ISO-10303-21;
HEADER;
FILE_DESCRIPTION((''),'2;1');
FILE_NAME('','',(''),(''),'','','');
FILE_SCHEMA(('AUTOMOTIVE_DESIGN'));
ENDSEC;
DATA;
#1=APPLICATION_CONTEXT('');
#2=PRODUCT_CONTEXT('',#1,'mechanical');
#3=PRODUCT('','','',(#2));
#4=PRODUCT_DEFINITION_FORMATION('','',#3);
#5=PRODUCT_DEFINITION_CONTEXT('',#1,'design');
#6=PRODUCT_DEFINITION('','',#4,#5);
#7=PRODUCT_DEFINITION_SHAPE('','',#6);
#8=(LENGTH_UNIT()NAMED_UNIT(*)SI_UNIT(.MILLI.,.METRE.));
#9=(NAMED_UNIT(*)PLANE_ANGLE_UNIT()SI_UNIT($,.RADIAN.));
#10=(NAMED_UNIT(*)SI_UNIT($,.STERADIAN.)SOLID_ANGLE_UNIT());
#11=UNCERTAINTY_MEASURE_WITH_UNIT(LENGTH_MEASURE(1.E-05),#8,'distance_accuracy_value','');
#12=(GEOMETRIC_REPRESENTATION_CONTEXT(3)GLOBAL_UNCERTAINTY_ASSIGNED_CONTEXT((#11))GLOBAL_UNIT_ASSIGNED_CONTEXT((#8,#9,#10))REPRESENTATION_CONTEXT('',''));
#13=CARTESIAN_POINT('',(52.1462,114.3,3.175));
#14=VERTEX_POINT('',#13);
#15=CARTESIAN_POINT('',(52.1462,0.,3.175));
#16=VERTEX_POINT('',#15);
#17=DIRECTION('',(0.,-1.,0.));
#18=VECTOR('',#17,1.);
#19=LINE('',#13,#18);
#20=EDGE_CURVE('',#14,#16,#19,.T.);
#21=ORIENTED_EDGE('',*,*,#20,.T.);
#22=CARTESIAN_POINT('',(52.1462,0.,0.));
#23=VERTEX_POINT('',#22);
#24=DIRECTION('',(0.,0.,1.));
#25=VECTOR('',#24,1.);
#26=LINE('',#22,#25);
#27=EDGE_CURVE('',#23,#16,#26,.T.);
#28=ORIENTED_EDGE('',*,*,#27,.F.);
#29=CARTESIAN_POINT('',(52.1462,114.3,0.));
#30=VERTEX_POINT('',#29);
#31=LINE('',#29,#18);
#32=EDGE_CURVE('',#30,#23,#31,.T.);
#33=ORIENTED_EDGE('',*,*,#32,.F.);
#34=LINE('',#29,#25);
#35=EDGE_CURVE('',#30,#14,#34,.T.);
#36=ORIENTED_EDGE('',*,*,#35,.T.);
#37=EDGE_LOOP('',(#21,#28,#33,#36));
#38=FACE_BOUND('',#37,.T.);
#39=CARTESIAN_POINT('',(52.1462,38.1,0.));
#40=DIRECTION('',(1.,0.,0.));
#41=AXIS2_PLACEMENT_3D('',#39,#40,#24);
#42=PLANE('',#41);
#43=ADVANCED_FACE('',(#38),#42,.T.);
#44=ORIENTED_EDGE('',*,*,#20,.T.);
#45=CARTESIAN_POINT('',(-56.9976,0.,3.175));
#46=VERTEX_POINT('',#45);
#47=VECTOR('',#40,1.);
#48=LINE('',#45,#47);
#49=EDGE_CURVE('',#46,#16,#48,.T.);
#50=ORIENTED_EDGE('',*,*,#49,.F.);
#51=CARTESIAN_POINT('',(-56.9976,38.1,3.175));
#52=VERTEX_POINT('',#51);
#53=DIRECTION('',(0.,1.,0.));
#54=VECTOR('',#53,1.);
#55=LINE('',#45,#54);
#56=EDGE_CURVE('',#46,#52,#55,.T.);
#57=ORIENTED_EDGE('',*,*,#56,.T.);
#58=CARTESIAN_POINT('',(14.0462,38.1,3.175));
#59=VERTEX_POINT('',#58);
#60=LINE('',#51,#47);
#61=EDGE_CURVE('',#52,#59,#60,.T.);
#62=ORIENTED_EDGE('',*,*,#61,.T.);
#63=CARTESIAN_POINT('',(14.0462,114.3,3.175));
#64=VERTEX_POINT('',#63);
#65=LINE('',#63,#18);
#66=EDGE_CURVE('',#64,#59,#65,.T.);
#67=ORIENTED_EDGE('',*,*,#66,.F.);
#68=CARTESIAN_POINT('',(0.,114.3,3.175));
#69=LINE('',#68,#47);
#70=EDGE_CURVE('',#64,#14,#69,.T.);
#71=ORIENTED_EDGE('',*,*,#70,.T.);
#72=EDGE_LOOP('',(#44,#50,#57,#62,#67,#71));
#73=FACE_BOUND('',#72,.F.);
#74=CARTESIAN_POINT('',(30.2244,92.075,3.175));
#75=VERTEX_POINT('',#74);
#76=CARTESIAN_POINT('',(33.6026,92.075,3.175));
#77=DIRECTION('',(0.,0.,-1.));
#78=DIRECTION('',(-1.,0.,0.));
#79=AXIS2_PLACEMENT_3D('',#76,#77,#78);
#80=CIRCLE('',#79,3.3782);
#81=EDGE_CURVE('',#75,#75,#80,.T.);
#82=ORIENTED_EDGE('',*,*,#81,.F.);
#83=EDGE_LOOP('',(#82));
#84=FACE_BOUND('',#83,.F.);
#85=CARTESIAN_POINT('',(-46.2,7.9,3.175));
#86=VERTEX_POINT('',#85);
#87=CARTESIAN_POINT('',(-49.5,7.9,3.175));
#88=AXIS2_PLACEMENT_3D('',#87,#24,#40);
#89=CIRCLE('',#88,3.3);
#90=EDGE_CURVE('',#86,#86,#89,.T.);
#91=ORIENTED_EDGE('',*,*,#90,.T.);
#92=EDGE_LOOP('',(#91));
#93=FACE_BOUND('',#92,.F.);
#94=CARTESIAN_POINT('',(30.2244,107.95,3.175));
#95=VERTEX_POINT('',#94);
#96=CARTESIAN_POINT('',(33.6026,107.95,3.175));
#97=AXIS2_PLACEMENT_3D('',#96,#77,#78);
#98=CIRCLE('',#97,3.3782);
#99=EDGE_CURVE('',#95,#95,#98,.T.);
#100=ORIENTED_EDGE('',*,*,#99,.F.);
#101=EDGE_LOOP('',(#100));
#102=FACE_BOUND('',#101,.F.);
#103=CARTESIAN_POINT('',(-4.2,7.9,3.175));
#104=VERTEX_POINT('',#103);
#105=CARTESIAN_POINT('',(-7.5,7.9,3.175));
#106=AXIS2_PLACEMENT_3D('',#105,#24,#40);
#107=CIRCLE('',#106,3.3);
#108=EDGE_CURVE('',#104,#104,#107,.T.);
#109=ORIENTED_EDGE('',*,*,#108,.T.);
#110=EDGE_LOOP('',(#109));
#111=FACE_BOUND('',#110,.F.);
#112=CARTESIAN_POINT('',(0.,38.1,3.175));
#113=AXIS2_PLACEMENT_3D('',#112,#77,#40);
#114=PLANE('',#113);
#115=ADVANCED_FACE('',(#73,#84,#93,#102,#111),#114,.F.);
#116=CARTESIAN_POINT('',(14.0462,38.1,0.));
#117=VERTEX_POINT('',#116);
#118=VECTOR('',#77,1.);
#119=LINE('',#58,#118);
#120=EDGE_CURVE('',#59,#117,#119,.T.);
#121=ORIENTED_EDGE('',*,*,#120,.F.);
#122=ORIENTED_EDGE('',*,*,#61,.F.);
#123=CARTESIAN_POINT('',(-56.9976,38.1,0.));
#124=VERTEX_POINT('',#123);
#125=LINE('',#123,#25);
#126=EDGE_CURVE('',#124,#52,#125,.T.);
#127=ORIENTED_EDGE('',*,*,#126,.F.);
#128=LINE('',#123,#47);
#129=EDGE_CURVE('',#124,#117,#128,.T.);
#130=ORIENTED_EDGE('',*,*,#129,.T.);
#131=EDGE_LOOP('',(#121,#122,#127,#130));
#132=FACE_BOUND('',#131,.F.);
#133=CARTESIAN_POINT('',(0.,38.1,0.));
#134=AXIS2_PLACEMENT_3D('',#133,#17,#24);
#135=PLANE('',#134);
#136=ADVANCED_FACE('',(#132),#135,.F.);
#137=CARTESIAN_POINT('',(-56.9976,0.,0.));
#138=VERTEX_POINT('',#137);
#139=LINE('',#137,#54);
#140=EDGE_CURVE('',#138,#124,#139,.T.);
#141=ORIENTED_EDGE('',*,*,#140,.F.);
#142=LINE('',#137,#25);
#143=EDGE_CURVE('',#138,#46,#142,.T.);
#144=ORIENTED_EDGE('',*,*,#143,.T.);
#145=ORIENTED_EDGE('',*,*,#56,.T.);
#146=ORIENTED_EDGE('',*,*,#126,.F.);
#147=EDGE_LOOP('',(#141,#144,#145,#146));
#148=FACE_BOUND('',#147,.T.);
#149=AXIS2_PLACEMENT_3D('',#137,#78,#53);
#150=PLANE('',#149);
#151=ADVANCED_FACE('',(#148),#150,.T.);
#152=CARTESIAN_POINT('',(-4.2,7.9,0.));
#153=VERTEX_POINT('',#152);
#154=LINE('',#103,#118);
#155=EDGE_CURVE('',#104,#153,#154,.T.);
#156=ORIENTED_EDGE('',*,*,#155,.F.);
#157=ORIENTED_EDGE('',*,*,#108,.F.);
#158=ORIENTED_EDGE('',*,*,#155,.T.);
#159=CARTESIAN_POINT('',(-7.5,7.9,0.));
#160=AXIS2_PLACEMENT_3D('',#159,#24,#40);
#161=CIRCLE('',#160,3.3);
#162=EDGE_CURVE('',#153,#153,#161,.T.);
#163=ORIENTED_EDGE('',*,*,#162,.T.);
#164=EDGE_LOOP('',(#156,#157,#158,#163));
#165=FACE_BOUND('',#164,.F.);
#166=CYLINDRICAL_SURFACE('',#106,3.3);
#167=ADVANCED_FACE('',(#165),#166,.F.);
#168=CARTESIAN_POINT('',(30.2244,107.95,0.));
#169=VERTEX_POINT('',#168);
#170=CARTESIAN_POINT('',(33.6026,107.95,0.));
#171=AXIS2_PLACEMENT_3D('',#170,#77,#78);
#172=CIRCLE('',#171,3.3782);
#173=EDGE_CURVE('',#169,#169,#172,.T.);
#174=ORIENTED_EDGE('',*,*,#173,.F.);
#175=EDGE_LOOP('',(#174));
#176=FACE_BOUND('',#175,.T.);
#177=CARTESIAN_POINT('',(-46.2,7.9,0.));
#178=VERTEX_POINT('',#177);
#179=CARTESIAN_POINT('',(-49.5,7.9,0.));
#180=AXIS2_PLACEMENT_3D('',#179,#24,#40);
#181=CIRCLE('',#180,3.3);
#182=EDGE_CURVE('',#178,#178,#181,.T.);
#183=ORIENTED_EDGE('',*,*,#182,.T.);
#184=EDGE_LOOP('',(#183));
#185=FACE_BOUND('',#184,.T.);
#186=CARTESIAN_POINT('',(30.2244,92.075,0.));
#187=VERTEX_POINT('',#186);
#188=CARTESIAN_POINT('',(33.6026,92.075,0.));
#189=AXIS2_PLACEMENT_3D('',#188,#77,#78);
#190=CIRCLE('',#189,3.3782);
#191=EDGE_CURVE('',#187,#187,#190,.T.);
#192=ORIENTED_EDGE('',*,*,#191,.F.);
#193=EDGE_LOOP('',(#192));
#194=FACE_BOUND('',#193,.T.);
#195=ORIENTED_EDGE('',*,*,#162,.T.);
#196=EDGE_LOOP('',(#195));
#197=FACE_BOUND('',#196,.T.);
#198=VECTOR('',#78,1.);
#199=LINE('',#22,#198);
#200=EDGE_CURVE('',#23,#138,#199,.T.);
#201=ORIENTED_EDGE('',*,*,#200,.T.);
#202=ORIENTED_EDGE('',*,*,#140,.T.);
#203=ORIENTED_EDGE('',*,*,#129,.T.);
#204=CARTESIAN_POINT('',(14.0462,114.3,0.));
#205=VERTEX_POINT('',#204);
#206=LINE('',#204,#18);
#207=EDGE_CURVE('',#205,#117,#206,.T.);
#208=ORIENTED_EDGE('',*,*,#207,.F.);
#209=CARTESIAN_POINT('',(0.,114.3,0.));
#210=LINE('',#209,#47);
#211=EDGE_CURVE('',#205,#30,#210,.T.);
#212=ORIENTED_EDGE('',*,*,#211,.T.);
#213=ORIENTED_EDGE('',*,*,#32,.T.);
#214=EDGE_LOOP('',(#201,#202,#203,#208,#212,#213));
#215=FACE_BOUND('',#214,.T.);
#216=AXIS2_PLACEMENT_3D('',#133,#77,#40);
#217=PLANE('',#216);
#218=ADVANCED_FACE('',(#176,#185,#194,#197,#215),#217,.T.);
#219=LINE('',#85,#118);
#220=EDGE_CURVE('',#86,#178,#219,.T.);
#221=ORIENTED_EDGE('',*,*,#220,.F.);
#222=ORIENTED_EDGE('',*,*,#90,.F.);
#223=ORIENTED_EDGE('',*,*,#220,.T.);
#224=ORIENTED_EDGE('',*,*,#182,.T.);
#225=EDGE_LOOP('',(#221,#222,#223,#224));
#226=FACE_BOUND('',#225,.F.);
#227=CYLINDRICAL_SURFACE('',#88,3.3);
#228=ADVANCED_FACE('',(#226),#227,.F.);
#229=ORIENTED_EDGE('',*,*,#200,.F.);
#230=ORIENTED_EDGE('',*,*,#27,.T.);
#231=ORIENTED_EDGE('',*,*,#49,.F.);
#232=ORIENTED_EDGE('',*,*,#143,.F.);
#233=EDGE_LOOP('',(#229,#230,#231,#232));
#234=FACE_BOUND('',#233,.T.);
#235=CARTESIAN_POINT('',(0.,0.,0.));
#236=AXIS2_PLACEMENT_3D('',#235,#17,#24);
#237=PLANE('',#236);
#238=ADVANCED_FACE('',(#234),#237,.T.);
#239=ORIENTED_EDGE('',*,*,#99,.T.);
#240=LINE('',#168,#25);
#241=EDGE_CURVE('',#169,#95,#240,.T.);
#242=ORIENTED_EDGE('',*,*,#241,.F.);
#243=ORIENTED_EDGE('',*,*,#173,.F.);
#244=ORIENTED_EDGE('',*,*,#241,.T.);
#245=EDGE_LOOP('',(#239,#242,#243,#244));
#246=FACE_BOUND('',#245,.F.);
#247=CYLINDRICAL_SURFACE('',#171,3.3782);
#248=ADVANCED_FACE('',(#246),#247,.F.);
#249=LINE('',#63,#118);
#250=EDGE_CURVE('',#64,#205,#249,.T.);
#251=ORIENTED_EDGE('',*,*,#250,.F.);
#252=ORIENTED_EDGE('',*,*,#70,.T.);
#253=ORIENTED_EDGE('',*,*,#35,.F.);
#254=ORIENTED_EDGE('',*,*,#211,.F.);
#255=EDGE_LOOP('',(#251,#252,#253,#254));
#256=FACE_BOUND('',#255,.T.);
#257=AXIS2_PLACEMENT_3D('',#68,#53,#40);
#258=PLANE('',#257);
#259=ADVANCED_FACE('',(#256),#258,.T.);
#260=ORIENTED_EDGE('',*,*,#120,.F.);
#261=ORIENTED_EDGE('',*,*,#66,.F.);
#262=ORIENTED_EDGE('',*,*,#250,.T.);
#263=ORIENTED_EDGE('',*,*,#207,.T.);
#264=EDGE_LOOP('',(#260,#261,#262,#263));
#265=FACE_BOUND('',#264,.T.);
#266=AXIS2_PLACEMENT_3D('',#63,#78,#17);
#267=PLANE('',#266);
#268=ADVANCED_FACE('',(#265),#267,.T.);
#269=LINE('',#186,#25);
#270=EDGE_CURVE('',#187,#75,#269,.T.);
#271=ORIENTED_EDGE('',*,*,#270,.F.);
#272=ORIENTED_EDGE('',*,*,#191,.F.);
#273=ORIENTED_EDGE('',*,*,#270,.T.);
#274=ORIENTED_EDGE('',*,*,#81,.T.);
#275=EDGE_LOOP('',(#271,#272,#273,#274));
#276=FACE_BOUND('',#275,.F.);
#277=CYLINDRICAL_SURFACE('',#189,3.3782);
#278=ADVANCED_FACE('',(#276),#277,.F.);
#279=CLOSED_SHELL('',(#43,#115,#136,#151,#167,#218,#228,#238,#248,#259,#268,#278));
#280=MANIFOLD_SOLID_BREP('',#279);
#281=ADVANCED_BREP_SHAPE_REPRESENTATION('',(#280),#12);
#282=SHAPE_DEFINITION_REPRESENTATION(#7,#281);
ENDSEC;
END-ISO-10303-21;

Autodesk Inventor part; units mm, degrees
ref_plane "YZ Plane" through (0, 0, 0) normal (1, 0, 0) x (0, 1, 0)
ref_plane "XZ Plane" through (0, 0, 0) normal (0, 1, 0) x (-1, 0, 0)
ref_plane "XY Plane" through (0, 0, 0) normal (0, 0, 1) x (1, 0, 0)
sketch "Sketch1" plane through (0, 0, 0) normal (0, 0, 1) x (1, 0, 0)
  line L0 (0, 0) -> (-56.9976, 0)
  line L1 (-56.9976, 0) -> (-56.9976, 38.1)
  line L2 (-56.9976, 38.1) -> (0, 38.1)
  line L3 (0, 38.1) -> (0, 0)
  line L4 (0, 38.1) -> (-7.493, 38.1)
  line L5 (-7.493, 38.1) -> (-7.493, 8.1026)
  line L6 (-56.9976, 38.1) -> (-49.5046, 38.1)
  line L7 (-49.5046, 38.1) -> (-49.5046, 8.1026)
  dimension "d1" = 56.9976
  dimension "d2" = 38.1
  dimension "d3" = 7.493
  dimension "d4" = 29.9974
  dimension "d5" = 7.493
extrude "Plate1" add sketch "Sketch1" along normal blind 3.175
sketch "Sketch8" plane through (0, 0, 3.175) normal (0, 0, 1) x (1, 0, 0)
  circle A0 centre (-7.5, 7.9) radius 3.3 projected
  circle A1 centre (-49.5, 7.9) radius 3.3 projected
extrude "Cut1" cut sketch "Sketch8" against normal blind 3.175
sketch "Sketch10" plane through (0, 0, 3.175) normal (1, 0, 0) x (0, 0, -1)
  line L0 (0, 38.1) -> (0, 0) projected
  line L1 (3.175, 0) -> (0, 0) projected
  line L2 (3.175, 0) -> (3.175, 38.1) projected
  line L3 (3.175, 38.1) -> (0, 38.1) projected
extrude "Extrusion1" add sketch "Sketch10" along normal blind 52.1462
sketch "Sketch13" plane through (0, 38.1, 3.175) normal (0, 1, 0) x (1, 0, 0)
  line L0 (0, 3.175) -> (0, 0) projected
  line L1 (0, 0) -> (52.1462, 0) projected
  line L2 (52.1462, 3.175) -> (52.1462, 0) projected
  line L3 (0, 3.175) -> (52.1462, 3.175) projected
extrude "Extrusion2" add sketch "Sketch13" along normal blind 76.2
sketch "Sketch14" plane through (0, 0, 0) normal (0, 0, -1) x (-1, 0, 0)
  circle A0 centre (-33.6026, 107.95) radius 3.3782 projected
  circle A1 centre (-33.6026, 92.075) radius 3.3782 projected
  point P0 (0, 0)
extrude "Cut4" cut sketch "Sketch14" against normal blind 3.175
sketch "Sketch15" plane through (0, 0, 3.175) normal (0, 0, 1) x (1, 0, 0)
  line L0 (0, 114.3) -> (52.1462, 114.3) projected
  line L1 (0, 38.1) -> (0, 114.3) projected
  line L2 (-56.9976, 38.1) -> (0, 38.1) projected
  line L3 (52.1462, 114.3) -> (14.0462, 114.3)
  line L4 (14.0462, 114.3) -> (14.0462, 38.1)
  line L5 (14.0462, 38.1) -> (0, 38.1)
  point P0 (0, 0)
  dimension "d31" = 38.1
extrude "Cut5" cut sketch "Sketch15" against normal blind 3.175
equation "\"d19\" = Thickness"
equation "\"d29\" = Thickness"
equation "\"d32\" = Thickness"
equation "\"BendRadius\" = Thickness"
equation "\"BendReliefWidth\" = Thickness"
equation "\"BendReliefDepth\" = 0.5 * Thickness"
equation "\"CornerReliefSize\" = 4 * Thickness"
equation "\"MinimumRemnant\" = 2 * Thickness"
equation "\"TransitionRadius\" = BendRadius"
equation "\"JacobiRadiusSize\" = BendRadius"
equation "\"GapSize\" = Thickness"
equation "\"d8\" = BendRadius"
equation "\"Thickness\" = 3.175"
properties part number "endstop 3" material "Aluminum 6061"
